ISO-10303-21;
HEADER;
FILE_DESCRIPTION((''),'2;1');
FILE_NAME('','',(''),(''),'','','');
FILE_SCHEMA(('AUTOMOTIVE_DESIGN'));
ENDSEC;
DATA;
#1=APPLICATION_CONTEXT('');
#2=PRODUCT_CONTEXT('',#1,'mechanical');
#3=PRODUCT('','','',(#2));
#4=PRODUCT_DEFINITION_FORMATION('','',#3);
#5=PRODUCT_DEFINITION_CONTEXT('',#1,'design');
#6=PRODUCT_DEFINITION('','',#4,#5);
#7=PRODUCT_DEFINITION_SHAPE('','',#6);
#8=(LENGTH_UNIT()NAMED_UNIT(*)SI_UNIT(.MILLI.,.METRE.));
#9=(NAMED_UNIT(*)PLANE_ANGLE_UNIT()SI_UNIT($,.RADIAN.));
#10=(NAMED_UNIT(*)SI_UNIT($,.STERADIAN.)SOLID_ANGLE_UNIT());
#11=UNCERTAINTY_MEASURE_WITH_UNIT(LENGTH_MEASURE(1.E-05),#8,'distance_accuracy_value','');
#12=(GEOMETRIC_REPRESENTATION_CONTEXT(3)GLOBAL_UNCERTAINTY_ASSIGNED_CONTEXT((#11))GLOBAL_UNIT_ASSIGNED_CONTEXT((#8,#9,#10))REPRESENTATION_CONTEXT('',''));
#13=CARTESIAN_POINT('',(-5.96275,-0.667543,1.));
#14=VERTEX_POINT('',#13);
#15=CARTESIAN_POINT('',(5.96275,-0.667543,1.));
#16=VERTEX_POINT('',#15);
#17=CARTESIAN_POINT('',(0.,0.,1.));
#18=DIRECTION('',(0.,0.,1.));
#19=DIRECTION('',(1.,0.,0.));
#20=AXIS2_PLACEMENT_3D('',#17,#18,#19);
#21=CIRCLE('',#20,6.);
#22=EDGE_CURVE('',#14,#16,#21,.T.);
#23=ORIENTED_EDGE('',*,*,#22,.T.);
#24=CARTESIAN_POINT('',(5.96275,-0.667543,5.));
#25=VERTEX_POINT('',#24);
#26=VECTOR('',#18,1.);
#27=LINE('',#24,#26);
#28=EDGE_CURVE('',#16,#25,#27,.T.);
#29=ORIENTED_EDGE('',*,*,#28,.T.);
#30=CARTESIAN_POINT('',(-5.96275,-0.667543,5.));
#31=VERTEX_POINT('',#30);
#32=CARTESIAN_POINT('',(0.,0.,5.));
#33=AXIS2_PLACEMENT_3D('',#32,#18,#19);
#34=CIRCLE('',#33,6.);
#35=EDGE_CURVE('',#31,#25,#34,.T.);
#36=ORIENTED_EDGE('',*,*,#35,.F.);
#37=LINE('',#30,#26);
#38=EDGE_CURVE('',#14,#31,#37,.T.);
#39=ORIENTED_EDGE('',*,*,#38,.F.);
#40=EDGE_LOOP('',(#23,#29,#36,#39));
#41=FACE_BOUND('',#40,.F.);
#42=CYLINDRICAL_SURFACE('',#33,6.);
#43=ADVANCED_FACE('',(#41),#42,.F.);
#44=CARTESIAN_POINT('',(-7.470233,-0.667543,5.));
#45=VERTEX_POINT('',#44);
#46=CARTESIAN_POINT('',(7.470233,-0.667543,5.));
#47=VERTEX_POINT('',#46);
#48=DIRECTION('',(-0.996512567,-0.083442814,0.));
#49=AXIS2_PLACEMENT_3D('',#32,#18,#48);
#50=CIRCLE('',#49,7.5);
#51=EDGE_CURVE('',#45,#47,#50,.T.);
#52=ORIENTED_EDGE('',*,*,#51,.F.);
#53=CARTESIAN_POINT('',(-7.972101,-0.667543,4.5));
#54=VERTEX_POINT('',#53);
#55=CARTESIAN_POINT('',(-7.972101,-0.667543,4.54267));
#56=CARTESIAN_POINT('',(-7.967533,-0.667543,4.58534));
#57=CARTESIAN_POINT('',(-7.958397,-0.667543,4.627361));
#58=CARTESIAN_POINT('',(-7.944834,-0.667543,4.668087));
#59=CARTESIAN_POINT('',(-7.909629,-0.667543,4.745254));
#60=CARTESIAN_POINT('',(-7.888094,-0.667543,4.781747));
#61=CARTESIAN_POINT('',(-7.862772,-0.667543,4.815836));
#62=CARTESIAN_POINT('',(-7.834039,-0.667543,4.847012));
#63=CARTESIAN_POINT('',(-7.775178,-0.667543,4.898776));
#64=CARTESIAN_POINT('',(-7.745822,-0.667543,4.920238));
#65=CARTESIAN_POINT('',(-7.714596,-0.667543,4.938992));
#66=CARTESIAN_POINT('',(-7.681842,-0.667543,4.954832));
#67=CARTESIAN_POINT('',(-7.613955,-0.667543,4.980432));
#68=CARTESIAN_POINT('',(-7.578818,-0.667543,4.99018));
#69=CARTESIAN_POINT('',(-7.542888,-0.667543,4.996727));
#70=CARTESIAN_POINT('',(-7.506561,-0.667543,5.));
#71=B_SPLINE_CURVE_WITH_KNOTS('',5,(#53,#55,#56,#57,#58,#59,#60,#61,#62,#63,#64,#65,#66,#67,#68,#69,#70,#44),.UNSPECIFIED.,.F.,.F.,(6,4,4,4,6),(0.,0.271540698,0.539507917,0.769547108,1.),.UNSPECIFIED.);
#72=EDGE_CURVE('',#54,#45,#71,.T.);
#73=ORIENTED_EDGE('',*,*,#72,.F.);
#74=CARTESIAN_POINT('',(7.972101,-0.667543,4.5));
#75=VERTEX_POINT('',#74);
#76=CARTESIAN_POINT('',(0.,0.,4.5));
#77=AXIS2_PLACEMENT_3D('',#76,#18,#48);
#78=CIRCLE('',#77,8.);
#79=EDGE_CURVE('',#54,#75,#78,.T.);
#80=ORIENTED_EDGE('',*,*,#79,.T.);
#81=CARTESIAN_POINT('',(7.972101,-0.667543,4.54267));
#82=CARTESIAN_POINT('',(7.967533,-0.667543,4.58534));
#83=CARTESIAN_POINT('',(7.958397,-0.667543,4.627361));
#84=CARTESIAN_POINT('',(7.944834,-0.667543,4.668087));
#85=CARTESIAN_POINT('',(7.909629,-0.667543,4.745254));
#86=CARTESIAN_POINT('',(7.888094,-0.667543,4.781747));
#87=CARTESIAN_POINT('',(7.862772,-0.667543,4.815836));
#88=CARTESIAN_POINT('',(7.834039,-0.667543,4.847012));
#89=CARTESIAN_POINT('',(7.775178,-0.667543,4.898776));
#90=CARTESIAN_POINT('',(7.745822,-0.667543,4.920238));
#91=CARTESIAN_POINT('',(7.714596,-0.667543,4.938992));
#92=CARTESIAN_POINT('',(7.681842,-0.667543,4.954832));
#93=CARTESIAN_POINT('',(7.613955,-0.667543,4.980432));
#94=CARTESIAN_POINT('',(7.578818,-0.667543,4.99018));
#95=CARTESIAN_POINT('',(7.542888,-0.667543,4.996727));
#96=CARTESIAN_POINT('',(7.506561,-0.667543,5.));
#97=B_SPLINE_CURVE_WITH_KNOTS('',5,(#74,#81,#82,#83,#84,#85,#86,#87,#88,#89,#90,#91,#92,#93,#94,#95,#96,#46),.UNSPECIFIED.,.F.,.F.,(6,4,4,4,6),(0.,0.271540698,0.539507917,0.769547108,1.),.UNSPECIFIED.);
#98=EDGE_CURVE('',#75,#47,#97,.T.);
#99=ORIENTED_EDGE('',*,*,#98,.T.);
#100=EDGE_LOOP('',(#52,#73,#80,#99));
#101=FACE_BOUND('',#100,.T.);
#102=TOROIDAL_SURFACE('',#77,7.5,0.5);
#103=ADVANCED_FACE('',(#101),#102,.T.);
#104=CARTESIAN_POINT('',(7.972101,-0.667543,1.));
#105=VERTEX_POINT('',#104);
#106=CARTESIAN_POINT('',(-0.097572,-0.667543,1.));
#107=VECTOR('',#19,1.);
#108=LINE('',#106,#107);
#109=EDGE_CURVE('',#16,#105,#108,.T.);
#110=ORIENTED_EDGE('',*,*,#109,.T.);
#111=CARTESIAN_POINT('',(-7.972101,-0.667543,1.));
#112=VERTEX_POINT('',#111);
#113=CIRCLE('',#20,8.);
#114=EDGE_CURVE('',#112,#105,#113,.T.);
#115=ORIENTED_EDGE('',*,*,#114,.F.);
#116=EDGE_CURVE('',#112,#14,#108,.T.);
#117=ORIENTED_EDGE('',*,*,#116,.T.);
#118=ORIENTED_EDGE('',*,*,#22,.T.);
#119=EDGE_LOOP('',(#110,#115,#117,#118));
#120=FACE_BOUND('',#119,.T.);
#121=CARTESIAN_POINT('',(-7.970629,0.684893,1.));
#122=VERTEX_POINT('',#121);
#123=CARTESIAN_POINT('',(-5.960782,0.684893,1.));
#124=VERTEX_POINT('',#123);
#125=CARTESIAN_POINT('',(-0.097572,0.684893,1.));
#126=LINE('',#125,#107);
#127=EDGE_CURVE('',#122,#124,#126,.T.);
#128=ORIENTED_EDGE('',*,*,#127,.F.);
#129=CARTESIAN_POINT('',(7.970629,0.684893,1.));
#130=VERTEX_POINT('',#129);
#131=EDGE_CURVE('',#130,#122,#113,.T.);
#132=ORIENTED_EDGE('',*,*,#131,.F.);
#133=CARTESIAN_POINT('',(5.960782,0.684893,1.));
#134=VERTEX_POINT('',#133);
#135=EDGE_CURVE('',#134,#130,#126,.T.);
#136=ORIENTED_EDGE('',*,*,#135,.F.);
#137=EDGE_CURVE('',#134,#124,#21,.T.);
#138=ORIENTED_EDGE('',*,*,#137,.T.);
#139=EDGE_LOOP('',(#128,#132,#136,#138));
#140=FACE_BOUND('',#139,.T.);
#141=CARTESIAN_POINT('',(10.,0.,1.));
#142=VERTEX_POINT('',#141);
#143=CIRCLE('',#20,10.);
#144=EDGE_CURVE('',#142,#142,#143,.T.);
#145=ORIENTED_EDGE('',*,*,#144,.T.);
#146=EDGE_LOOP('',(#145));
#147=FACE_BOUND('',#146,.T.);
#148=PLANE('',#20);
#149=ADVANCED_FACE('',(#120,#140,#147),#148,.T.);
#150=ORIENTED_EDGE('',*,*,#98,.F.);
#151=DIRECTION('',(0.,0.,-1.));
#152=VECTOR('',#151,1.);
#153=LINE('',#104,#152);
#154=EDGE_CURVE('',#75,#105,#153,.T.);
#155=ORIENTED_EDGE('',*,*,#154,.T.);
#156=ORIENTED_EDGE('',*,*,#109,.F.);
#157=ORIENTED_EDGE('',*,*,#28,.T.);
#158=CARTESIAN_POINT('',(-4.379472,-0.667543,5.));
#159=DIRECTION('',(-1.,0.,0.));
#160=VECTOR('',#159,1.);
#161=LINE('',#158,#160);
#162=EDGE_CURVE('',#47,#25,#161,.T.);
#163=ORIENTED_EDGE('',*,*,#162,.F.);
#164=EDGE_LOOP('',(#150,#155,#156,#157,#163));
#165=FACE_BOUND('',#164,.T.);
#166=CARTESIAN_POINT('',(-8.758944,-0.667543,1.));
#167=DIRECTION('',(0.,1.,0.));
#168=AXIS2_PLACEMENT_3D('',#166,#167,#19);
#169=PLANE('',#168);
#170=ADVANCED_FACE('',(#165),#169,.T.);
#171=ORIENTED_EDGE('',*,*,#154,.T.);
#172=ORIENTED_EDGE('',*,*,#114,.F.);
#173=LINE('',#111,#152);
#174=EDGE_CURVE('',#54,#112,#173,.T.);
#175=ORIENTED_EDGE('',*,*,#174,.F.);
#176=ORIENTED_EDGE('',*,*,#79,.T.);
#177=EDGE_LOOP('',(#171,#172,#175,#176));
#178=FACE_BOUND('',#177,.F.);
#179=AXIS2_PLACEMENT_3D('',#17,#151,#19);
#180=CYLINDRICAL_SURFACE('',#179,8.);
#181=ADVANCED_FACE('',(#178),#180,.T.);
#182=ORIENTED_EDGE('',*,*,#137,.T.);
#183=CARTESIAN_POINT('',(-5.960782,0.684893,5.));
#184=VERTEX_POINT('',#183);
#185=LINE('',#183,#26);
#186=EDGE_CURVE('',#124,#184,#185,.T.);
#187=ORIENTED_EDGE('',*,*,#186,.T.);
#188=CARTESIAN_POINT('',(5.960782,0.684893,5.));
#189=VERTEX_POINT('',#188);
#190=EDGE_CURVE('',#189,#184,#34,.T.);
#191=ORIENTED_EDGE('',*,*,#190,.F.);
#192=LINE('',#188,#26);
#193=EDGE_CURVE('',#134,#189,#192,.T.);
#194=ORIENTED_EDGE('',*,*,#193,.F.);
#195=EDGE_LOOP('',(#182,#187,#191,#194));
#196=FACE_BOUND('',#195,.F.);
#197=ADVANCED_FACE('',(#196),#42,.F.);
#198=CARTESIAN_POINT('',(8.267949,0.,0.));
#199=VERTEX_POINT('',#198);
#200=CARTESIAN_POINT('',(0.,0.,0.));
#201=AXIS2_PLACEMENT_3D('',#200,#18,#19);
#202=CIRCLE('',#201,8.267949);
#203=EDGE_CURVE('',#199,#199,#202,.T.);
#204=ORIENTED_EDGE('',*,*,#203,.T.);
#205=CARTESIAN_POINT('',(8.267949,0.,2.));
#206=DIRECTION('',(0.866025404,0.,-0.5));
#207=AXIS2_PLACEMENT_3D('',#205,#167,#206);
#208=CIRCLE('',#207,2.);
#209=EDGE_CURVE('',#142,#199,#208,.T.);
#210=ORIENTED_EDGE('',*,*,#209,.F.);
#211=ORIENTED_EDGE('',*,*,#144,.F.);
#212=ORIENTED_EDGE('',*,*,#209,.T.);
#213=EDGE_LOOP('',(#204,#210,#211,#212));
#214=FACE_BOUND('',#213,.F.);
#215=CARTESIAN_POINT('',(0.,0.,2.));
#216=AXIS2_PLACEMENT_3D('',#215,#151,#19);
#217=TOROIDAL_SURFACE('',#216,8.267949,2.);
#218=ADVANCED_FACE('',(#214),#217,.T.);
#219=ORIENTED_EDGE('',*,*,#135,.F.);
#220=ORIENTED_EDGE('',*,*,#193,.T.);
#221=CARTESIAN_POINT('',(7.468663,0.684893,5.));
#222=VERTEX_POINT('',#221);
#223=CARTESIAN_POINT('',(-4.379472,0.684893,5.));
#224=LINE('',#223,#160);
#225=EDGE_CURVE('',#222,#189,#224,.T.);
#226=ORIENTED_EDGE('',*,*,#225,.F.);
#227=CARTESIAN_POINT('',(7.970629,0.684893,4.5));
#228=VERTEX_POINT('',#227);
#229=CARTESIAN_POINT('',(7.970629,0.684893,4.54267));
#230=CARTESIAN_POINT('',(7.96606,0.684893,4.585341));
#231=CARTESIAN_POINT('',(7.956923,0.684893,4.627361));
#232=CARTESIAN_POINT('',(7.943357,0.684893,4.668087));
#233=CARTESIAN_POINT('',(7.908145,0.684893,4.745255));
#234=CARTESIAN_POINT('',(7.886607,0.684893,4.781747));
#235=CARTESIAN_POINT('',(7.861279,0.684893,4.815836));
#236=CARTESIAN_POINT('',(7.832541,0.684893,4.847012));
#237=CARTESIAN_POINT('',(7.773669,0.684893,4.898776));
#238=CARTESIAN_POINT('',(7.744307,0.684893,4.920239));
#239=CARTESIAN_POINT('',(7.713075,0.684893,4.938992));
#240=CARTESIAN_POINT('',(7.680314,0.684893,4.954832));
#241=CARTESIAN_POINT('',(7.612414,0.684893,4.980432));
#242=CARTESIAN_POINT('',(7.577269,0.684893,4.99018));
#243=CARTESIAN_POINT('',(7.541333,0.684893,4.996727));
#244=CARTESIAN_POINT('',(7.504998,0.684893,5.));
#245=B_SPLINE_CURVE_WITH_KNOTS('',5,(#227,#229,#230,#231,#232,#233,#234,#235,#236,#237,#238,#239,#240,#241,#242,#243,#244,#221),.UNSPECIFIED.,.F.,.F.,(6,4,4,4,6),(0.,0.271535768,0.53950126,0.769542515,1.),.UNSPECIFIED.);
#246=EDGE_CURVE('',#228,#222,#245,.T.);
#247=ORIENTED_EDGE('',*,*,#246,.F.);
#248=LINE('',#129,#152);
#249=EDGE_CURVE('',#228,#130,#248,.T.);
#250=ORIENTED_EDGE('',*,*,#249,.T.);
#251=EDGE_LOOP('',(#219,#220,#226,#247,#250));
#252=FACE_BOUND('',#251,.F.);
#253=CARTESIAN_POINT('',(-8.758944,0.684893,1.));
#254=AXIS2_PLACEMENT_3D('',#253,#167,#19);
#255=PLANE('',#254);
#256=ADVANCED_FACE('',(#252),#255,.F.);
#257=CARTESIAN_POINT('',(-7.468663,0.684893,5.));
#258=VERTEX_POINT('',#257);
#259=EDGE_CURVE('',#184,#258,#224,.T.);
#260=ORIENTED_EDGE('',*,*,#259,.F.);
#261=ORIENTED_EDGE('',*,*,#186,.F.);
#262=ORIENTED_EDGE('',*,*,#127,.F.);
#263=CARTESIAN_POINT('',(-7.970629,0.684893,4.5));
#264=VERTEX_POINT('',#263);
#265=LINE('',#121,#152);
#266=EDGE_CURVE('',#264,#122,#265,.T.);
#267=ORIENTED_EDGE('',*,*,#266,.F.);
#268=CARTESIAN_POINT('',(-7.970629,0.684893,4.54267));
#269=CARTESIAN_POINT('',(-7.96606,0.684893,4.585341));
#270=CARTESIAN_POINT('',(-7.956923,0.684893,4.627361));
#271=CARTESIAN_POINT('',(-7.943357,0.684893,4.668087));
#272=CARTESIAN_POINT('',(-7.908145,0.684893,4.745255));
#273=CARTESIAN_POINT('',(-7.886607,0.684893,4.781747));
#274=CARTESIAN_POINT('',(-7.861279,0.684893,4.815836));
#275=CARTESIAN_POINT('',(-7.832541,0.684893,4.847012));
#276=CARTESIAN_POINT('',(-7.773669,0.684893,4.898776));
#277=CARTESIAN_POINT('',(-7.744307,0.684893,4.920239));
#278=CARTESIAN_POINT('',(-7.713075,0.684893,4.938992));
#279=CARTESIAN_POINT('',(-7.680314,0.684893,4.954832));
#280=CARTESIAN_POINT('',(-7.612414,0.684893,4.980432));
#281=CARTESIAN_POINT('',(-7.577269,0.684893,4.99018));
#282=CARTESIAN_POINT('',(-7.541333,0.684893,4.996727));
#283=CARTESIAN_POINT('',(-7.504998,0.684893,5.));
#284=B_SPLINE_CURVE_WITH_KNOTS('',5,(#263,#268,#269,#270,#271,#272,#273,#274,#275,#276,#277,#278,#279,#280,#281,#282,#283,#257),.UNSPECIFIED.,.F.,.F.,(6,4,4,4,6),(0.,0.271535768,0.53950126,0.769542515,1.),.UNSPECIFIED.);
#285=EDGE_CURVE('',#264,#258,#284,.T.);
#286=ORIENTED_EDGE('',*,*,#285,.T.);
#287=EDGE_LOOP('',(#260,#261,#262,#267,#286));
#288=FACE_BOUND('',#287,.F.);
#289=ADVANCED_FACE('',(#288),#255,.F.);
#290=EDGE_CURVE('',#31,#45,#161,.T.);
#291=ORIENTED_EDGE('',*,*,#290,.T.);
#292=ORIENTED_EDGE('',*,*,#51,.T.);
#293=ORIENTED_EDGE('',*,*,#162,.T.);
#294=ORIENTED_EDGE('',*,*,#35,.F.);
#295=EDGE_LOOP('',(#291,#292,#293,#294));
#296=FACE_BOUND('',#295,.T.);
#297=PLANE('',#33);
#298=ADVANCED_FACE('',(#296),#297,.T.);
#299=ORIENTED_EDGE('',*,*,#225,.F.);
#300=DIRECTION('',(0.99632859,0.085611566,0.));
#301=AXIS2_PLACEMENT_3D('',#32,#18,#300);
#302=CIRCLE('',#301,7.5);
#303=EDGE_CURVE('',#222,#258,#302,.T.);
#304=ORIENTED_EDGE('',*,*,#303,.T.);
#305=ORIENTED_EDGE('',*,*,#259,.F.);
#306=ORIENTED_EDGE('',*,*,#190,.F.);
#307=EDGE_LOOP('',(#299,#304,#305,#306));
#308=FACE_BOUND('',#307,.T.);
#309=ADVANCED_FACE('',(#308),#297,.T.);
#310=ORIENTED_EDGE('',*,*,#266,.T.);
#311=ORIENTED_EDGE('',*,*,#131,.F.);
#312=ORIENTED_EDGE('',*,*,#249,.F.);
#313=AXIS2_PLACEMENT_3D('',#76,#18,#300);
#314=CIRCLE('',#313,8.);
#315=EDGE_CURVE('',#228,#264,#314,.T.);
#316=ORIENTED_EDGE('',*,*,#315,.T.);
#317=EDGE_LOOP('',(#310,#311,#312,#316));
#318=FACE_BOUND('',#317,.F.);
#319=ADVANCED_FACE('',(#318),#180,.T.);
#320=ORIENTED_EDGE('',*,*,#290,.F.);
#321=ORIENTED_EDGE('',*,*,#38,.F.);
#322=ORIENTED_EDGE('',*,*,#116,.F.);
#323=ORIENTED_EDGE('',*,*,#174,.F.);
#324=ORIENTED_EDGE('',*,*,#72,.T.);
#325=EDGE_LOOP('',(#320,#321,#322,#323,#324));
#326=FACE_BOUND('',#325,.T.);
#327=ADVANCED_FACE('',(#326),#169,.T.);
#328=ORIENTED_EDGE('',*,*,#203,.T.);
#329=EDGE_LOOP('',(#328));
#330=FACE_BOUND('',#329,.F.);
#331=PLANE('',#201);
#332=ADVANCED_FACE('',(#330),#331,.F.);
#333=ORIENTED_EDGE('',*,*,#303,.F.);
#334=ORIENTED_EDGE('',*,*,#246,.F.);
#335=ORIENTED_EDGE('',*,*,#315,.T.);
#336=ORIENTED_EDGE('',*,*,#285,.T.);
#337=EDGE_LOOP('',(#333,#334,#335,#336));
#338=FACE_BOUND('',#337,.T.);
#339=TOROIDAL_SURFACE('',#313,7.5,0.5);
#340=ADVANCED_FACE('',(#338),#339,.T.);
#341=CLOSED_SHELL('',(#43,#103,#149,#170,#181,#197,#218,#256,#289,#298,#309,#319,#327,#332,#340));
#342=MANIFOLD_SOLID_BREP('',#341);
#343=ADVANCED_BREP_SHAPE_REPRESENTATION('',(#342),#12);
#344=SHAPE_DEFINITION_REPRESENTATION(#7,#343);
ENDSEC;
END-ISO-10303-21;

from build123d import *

# Parameters (mm, degrees)
F0_R     = 10
F1_DEPTH = 1
F3_R     = 8
F4_DEPTH = 4
F5_R     = 6
F6_DEPTH = 4
F7_W     = 17.3227433115
F7_H     = 1.3524350361
F8_DEPTH = 25
F9_R     = 0.5


# Not quite as in the source:
# - a fillet or chamfer that OpenCascade refuses, or shapes differently, is made with other operations: its cross-section is extruded or revolved along the edge and cut away or added


with BuildPart() as f1:
    # F0 (on Top) → F1 (new body)
    with BuildSketch(Plane.XY):
        Circle(F0_R)
    extrude(amount=F1_DEPTH)

    # F2: fillet of radius 2 on 1 edges, made by hand

    # F2_s1 → F2_t2 (revolve, cut)
    with BuildSketch(Plane.XZ):
        with BuildLine():
            ThreePointArc((10, 1), (9.2679491924, 0.2679491924), (8.2679491924, 0))
            Line((8.2679491924, 0), (10, 0))
            Line((10, 0), (10, 1))
        make_face()
    revolve(axis=Axis((0, 0, 0), (0, 0, 1)), mode=Mode.SUBTRACT)

    # F3 (on face) → F4 (join)
    with BuildSketch(Plane.XY.offset(1)):
        Circle(F3_R)
    extrude(amount=F4_DEPTH)

    # F5 (on face) → F6 (cut)
    with BuildSketch(Plane.XY.offset(5)):
        Circle(F5_R)
    extrude(amount=-F6_DEPTH, mode=Mode.SUBTRACT)

    # F7 (on face) → F8 (cut)
    with BuildSketch(Plane.XY.offset(1)):
        with Locations((-0.0975718722, 0.0086750078)):
            Rectangle(F7_W, F7_H)
    extrude(amount=F8_DEPTH, mode=Mode.SUBTRACT)

    # F9
    f9_edges = [f1.edges().sort_by_distance(p)[0] for p in [
        (0, 8, 5),
        (0, -8, 5),
    ]]
    fillet(f9_edges, radius=F9_R)


solid = f1.part
